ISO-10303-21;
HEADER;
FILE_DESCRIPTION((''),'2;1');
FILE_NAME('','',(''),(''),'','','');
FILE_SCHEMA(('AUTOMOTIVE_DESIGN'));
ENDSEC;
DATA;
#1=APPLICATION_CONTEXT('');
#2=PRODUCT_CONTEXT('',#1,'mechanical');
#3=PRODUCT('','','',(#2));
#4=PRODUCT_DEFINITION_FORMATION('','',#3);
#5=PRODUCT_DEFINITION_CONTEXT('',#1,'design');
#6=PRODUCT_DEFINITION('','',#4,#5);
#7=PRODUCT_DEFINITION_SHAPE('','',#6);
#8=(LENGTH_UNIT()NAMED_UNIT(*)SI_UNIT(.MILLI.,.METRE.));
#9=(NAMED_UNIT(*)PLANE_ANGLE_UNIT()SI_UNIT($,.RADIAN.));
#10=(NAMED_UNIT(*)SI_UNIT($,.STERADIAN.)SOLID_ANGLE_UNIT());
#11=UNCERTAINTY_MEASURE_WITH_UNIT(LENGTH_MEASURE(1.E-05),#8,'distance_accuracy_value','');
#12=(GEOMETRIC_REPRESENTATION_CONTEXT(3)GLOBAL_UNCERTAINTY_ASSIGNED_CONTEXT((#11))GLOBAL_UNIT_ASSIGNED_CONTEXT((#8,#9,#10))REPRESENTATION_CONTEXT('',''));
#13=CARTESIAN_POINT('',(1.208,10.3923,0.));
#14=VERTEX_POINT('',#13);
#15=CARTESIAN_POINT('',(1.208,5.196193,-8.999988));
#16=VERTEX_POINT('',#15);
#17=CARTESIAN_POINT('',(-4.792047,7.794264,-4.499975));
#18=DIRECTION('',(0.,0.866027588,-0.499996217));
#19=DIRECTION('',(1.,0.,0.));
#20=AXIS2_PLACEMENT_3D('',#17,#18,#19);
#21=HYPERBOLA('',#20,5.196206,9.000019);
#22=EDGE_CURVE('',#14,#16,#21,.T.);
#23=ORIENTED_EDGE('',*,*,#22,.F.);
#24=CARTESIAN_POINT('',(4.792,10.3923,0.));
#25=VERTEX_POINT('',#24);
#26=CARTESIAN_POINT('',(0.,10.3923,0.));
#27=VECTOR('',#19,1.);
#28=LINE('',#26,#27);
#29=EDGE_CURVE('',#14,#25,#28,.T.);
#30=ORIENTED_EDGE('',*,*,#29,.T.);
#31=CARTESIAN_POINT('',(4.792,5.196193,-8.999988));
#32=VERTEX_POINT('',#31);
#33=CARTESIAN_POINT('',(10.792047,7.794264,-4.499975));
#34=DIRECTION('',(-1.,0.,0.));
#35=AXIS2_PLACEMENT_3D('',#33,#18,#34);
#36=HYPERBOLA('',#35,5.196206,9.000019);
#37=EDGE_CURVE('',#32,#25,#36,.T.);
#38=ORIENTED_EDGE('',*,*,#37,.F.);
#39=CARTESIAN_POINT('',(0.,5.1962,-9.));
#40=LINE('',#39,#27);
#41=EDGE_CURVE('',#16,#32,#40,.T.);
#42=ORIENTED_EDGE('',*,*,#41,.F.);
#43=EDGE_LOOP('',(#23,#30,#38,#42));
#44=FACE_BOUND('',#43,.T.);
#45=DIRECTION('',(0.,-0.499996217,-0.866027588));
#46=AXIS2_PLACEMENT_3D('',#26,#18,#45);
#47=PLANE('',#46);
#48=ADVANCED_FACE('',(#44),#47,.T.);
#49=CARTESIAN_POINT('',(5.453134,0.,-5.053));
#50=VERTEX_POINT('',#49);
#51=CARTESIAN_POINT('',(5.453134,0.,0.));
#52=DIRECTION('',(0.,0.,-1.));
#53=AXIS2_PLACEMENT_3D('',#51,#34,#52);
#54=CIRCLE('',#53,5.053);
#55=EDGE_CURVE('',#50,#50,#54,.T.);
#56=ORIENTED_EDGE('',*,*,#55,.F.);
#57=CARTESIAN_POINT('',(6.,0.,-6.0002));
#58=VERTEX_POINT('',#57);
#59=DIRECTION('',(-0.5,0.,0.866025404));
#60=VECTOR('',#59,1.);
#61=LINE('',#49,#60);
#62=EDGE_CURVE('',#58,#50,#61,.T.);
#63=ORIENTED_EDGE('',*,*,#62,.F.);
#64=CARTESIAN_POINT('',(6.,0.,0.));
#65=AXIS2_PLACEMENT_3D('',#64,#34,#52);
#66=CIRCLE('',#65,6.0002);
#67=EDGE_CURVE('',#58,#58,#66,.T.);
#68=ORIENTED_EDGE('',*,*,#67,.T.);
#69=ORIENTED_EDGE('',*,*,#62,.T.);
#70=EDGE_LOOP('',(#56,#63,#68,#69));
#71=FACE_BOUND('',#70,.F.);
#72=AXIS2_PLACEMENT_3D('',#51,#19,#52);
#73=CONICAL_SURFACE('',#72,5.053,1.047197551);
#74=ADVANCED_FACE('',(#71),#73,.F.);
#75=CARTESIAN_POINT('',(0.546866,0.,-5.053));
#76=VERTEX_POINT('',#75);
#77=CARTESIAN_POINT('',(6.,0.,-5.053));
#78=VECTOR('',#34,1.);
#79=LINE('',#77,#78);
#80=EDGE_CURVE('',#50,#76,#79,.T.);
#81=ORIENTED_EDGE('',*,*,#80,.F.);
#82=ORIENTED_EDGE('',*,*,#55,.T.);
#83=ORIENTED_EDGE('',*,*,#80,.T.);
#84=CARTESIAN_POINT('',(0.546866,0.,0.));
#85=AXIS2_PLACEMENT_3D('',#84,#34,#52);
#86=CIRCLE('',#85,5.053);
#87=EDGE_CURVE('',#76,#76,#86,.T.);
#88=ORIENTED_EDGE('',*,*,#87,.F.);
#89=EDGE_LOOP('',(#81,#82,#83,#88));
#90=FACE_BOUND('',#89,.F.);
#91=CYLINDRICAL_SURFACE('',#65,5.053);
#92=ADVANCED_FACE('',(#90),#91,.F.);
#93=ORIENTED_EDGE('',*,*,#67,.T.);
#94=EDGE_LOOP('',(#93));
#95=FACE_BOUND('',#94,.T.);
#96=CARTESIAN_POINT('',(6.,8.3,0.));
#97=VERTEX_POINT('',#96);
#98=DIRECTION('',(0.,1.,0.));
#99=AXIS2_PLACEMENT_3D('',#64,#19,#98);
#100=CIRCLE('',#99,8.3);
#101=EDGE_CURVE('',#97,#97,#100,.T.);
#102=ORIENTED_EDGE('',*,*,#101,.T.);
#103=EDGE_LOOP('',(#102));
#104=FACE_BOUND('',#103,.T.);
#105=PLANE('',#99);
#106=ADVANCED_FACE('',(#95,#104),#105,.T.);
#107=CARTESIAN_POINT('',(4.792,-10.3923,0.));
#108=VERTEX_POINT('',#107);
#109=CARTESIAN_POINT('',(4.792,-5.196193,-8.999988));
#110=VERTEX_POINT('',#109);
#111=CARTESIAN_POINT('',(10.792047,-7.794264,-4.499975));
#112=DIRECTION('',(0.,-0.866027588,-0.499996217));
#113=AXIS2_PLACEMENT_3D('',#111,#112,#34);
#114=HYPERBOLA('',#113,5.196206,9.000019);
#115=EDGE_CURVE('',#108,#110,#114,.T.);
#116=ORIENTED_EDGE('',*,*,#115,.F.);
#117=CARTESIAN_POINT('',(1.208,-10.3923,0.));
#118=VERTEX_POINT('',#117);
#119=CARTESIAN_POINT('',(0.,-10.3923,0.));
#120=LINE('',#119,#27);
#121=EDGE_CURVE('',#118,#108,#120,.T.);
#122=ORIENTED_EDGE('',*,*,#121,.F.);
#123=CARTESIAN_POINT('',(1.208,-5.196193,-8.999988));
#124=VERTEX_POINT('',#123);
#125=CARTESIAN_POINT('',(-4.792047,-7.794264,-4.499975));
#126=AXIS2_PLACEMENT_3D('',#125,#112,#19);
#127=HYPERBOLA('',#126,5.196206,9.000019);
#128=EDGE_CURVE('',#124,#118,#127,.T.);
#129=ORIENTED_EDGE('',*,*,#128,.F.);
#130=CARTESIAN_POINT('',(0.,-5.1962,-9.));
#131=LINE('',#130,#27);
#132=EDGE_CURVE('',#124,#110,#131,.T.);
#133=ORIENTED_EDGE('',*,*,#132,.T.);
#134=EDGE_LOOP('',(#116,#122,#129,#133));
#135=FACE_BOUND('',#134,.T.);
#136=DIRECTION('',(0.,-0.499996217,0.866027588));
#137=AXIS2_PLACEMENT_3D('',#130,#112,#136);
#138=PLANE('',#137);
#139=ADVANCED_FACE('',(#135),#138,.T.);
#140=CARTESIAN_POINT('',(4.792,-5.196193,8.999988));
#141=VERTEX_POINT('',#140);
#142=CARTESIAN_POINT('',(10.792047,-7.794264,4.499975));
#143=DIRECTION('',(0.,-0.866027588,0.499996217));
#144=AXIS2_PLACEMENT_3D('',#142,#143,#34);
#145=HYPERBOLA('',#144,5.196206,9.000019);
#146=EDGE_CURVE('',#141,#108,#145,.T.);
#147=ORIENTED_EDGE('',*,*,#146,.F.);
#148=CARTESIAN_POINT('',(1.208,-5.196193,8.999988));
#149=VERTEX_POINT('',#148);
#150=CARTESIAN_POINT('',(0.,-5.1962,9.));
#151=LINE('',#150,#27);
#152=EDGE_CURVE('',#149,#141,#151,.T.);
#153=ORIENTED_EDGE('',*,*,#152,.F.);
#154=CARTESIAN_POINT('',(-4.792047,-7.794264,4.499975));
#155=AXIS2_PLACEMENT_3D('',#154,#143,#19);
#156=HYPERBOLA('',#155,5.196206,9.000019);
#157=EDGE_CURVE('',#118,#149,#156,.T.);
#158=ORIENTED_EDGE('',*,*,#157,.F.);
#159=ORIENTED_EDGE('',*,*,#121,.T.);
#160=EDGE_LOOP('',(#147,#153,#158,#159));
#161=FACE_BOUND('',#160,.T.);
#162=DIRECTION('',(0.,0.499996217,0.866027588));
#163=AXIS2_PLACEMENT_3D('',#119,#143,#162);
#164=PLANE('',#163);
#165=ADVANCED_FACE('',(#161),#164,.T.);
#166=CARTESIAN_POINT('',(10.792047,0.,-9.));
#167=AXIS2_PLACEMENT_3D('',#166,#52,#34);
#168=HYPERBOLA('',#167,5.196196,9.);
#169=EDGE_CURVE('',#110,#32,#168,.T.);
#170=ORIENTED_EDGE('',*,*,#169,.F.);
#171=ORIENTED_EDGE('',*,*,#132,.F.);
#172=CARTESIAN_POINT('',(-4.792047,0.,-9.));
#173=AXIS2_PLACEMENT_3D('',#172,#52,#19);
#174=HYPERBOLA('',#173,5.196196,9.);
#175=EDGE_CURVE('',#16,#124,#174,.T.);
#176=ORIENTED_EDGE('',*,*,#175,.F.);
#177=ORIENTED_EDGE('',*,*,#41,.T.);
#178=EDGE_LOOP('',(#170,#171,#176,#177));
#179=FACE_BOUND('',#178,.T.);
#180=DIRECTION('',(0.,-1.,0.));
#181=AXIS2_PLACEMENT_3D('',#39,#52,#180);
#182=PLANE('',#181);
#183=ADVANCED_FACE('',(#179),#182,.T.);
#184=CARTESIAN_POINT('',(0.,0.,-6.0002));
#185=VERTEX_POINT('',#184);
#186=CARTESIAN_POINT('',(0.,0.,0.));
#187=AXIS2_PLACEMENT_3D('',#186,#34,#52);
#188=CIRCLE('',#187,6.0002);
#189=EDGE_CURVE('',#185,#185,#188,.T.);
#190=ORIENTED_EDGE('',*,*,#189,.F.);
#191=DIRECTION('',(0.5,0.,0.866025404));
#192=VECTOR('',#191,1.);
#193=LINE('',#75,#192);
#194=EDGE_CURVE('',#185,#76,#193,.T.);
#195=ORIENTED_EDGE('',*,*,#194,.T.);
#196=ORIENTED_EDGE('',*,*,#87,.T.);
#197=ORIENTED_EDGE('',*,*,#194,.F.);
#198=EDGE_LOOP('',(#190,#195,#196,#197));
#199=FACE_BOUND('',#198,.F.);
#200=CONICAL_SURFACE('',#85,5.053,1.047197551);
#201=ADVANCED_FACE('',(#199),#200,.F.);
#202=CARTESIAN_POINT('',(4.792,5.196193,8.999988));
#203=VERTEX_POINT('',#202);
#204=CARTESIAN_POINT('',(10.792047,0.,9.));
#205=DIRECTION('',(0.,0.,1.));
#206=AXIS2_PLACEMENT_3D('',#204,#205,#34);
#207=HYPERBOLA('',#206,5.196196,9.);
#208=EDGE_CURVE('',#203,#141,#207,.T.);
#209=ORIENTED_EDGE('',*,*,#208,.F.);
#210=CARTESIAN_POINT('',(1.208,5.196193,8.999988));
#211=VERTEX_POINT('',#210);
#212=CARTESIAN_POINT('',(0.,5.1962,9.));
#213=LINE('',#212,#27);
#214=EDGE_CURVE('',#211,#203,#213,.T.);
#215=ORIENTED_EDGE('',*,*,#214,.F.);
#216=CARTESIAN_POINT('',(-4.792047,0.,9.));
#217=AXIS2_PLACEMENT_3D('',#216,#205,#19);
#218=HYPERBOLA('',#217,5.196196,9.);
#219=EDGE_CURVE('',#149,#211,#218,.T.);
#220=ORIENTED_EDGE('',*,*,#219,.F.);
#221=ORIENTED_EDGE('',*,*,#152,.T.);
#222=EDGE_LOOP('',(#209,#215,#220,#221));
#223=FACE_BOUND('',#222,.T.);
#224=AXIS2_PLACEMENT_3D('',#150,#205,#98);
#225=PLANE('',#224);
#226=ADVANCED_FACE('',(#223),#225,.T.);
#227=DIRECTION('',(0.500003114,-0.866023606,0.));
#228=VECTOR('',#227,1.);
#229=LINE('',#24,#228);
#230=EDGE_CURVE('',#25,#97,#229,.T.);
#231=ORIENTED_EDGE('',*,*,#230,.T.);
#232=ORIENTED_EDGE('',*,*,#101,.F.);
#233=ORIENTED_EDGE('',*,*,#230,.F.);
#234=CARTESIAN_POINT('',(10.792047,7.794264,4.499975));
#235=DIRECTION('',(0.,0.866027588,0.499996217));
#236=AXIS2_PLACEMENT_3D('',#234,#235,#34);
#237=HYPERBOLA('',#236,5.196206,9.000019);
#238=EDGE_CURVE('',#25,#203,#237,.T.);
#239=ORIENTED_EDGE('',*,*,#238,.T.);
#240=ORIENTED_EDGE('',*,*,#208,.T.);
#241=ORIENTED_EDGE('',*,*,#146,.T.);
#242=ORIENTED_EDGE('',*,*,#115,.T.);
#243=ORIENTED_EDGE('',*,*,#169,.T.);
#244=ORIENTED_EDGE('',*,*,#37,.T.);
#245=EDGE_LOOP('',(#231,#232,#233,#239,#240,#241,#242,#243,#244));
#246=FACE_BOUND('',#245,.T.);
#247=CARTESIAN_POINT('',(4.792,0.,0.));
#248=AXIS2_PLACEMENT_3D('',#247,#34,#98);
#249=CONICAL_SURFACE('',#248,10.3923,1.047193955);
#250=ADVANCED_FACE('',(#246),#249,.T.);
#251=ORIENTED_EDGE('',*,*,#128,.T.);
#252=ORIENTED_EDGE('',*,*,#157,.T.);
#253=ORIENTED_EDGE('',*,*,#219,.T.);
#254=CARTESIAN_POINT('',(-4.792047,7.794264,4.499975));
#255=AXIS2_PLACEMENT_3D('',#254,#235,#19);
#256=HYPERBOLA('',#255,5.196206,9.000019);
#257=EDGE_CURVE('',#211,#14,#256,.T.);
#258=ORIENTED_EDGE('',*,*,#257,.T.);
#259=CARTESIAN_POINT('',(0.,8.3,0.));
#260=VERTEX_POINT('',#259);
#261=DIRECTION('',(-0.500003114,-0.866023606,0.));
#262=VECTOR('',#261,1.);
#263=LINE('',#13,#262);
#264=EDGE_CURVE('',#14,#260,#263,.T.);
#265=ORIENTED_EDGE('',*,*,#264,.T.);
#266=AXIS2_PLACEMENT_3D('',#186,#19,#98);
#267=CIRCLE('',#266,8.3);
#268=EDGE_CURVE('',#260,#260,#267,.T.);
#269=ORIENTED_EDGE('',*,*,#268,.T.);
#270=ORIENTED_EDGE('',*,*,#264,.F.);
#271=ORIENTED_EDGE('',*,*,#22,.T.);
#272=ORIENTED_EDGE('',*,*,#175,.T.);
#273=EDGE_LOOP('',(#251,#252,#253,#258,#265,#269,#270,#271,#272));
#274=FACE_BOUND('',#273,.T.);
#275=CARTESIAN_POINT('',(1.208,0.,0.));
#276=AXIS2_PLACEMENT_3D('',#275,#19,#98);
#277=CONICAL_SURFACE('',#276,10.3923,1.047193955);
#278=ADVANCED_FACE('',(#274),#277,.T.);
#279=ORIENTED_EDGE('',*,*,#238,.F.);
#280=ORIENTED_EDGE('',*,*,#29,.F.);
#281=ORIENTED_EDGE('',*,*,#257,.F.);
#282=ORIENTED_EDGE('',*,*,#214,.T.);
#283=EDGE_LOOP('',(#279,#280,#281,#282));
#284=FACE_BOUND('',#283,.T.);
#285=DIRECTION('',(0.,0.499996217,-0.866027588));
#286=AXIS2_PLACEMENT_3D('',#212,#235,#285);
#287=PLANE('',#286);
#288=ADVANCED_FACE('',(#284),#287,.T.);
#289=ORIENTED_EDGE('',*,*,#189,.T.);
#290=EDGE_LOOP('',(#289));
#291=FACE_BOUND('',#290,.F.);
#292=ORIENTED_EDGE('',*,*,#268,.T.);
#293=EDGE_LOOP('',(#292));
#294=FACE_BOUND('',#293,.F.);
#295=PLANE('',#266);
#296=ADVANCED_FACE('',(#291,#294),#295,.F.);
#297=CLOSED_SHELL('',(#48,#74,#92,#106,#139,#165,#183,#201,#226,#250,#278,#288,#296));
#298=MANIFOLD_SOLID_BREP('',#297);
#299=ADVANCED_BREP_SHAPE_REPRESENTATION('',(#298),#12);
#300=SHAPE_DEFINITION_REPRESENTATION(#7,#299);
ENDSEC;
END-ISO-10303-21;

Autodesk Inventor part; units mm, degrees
ref_plane "YZ Plane" through (0, 0, 0) normal (1, 0, 0) x (0, 1, 0)
ref_plane "XZ Plane" through (0, 0, 0) normal (0, 1, 0) x (-1, 0, 0)
sketch "Эскиз1" plane through (0, 0, 0) normal (1, 0, 0) x (0, 1, 0)
  line L0 (-10.3923, 0) -> (-5.1962, 9)
  line L1 (-5.1962, 9) -> (5.1962, 9)
  line L2 (5.1962, 9) -> (10.3923, 0)
  line L3 (10.3923, 0) -> (5.1962, -9)
  line L4 (5.1962, -9) -> (-5.1962, -9)
  line L5 (-5.1962, -9) -> (-10.3923, 0)
  point P0 (0, 0)
  point P1 (0, 0)
  dimension "d0" = 20.7846
extrude "Базовый элемент" add sketch "Эскиз1" along normal blind 6
sketch "Эскиз2" plane through (0, 0, 0) normal (0, 0, 1) x (1, 0, 0)
  line L0 (0, 5.1962) -> (0, 10.3923) projected
  line L1 (0, 10.3923) -> (6, 10.3923) projected
  line L2 (6, 5.1962) -> (6, 10.3923) projected
  line L3 (-1.2, 0) -> (7.2, 0) projected
  line L4 (1.208, 10.3923) -> (0, 8.3)
  line L5 (4.792, 10.3923) -> (6, 8.3)
  dimension "d3" = 30
  dimension "d4" = 30
  dimension "d5" = 16.6
  dimension "d6" = 16.6
revolve "Фаска1" cut sketch "Эскиз2" angle 360 about axis through (-10, 0, 0) along (1, 0, 0)
sketch "Эскиз3" plane through (6, 0, 0) normal (1, 0, 0) x (0, 0, -1)
  arc A0 (-0.625, -1.0825) -> (0.625, -1.0825) centre (0, 0) ccw projected
hole "Резьба" at (6, 0, 0) direction (-1, 0, 0) diameter 10.106 end through all thread size "M12x1.75" class "6H" standard "ISO Metric profile"
chamfer "Фаска2" distance 0.9472 angle 30 1 edges at (6, 0, 5.053) measured on face at (6, 7.125, -0.8651)
chamfer "Фаска3" distance 0.9472 angle 30 1 edges at (0, 0, 5.053) measured on face at (0, 7.125, -0.8651)
ref_plane "Work Plane1" through (-22.2728, 0, 0) normal (0, -0.8660254, -0.5) x (1, 0, 0)
equation "\"d0\" = 1.1547 * SW"
equation "\"d1\" = KOH"
equation "\"d3\" = ANG1"
equation "\"d4\" = ANG2"
equation "\"d5\" = SW0"
equation "\"d6\" = SW01"
equation "\"d8\" = -0.5 * GD1 + 0.5 * NND"
equation "\"d40\" = -0.5 * GD1 + 0.5 * NND"
equation "\"d10\" = -0.5 * GD1 + 0.5 * NND"
equation "\"d41\" = -0.5 * GD1 + 0.5 * NND"
equation "\"ANG1\" = 30deg"
equation "\"ANG2\" = 30deg"
equation "\"NND\" = 12"
equation "\"KOH\" = 6"
equation "\"SW\" = 18"
equation "\"SW0\" = 16.6"
equation "\"SW01\" = SW0"
equation "\"GUL\" = 0.541266 * PTC"
equation "\"THREADDIA\" = 12"
equation "\"TOA\" = 30deg"
equation "\"PTC\" = 1.75"
equation "\"E0\" = 1.155 * SW"
equation "\"GAL\" = 0.541266 * PTC"
equation "\"GD1\" = 10.105569"
properties part number "ISO 4035 - M12" material "Сталь нержавеющая, 440C"
